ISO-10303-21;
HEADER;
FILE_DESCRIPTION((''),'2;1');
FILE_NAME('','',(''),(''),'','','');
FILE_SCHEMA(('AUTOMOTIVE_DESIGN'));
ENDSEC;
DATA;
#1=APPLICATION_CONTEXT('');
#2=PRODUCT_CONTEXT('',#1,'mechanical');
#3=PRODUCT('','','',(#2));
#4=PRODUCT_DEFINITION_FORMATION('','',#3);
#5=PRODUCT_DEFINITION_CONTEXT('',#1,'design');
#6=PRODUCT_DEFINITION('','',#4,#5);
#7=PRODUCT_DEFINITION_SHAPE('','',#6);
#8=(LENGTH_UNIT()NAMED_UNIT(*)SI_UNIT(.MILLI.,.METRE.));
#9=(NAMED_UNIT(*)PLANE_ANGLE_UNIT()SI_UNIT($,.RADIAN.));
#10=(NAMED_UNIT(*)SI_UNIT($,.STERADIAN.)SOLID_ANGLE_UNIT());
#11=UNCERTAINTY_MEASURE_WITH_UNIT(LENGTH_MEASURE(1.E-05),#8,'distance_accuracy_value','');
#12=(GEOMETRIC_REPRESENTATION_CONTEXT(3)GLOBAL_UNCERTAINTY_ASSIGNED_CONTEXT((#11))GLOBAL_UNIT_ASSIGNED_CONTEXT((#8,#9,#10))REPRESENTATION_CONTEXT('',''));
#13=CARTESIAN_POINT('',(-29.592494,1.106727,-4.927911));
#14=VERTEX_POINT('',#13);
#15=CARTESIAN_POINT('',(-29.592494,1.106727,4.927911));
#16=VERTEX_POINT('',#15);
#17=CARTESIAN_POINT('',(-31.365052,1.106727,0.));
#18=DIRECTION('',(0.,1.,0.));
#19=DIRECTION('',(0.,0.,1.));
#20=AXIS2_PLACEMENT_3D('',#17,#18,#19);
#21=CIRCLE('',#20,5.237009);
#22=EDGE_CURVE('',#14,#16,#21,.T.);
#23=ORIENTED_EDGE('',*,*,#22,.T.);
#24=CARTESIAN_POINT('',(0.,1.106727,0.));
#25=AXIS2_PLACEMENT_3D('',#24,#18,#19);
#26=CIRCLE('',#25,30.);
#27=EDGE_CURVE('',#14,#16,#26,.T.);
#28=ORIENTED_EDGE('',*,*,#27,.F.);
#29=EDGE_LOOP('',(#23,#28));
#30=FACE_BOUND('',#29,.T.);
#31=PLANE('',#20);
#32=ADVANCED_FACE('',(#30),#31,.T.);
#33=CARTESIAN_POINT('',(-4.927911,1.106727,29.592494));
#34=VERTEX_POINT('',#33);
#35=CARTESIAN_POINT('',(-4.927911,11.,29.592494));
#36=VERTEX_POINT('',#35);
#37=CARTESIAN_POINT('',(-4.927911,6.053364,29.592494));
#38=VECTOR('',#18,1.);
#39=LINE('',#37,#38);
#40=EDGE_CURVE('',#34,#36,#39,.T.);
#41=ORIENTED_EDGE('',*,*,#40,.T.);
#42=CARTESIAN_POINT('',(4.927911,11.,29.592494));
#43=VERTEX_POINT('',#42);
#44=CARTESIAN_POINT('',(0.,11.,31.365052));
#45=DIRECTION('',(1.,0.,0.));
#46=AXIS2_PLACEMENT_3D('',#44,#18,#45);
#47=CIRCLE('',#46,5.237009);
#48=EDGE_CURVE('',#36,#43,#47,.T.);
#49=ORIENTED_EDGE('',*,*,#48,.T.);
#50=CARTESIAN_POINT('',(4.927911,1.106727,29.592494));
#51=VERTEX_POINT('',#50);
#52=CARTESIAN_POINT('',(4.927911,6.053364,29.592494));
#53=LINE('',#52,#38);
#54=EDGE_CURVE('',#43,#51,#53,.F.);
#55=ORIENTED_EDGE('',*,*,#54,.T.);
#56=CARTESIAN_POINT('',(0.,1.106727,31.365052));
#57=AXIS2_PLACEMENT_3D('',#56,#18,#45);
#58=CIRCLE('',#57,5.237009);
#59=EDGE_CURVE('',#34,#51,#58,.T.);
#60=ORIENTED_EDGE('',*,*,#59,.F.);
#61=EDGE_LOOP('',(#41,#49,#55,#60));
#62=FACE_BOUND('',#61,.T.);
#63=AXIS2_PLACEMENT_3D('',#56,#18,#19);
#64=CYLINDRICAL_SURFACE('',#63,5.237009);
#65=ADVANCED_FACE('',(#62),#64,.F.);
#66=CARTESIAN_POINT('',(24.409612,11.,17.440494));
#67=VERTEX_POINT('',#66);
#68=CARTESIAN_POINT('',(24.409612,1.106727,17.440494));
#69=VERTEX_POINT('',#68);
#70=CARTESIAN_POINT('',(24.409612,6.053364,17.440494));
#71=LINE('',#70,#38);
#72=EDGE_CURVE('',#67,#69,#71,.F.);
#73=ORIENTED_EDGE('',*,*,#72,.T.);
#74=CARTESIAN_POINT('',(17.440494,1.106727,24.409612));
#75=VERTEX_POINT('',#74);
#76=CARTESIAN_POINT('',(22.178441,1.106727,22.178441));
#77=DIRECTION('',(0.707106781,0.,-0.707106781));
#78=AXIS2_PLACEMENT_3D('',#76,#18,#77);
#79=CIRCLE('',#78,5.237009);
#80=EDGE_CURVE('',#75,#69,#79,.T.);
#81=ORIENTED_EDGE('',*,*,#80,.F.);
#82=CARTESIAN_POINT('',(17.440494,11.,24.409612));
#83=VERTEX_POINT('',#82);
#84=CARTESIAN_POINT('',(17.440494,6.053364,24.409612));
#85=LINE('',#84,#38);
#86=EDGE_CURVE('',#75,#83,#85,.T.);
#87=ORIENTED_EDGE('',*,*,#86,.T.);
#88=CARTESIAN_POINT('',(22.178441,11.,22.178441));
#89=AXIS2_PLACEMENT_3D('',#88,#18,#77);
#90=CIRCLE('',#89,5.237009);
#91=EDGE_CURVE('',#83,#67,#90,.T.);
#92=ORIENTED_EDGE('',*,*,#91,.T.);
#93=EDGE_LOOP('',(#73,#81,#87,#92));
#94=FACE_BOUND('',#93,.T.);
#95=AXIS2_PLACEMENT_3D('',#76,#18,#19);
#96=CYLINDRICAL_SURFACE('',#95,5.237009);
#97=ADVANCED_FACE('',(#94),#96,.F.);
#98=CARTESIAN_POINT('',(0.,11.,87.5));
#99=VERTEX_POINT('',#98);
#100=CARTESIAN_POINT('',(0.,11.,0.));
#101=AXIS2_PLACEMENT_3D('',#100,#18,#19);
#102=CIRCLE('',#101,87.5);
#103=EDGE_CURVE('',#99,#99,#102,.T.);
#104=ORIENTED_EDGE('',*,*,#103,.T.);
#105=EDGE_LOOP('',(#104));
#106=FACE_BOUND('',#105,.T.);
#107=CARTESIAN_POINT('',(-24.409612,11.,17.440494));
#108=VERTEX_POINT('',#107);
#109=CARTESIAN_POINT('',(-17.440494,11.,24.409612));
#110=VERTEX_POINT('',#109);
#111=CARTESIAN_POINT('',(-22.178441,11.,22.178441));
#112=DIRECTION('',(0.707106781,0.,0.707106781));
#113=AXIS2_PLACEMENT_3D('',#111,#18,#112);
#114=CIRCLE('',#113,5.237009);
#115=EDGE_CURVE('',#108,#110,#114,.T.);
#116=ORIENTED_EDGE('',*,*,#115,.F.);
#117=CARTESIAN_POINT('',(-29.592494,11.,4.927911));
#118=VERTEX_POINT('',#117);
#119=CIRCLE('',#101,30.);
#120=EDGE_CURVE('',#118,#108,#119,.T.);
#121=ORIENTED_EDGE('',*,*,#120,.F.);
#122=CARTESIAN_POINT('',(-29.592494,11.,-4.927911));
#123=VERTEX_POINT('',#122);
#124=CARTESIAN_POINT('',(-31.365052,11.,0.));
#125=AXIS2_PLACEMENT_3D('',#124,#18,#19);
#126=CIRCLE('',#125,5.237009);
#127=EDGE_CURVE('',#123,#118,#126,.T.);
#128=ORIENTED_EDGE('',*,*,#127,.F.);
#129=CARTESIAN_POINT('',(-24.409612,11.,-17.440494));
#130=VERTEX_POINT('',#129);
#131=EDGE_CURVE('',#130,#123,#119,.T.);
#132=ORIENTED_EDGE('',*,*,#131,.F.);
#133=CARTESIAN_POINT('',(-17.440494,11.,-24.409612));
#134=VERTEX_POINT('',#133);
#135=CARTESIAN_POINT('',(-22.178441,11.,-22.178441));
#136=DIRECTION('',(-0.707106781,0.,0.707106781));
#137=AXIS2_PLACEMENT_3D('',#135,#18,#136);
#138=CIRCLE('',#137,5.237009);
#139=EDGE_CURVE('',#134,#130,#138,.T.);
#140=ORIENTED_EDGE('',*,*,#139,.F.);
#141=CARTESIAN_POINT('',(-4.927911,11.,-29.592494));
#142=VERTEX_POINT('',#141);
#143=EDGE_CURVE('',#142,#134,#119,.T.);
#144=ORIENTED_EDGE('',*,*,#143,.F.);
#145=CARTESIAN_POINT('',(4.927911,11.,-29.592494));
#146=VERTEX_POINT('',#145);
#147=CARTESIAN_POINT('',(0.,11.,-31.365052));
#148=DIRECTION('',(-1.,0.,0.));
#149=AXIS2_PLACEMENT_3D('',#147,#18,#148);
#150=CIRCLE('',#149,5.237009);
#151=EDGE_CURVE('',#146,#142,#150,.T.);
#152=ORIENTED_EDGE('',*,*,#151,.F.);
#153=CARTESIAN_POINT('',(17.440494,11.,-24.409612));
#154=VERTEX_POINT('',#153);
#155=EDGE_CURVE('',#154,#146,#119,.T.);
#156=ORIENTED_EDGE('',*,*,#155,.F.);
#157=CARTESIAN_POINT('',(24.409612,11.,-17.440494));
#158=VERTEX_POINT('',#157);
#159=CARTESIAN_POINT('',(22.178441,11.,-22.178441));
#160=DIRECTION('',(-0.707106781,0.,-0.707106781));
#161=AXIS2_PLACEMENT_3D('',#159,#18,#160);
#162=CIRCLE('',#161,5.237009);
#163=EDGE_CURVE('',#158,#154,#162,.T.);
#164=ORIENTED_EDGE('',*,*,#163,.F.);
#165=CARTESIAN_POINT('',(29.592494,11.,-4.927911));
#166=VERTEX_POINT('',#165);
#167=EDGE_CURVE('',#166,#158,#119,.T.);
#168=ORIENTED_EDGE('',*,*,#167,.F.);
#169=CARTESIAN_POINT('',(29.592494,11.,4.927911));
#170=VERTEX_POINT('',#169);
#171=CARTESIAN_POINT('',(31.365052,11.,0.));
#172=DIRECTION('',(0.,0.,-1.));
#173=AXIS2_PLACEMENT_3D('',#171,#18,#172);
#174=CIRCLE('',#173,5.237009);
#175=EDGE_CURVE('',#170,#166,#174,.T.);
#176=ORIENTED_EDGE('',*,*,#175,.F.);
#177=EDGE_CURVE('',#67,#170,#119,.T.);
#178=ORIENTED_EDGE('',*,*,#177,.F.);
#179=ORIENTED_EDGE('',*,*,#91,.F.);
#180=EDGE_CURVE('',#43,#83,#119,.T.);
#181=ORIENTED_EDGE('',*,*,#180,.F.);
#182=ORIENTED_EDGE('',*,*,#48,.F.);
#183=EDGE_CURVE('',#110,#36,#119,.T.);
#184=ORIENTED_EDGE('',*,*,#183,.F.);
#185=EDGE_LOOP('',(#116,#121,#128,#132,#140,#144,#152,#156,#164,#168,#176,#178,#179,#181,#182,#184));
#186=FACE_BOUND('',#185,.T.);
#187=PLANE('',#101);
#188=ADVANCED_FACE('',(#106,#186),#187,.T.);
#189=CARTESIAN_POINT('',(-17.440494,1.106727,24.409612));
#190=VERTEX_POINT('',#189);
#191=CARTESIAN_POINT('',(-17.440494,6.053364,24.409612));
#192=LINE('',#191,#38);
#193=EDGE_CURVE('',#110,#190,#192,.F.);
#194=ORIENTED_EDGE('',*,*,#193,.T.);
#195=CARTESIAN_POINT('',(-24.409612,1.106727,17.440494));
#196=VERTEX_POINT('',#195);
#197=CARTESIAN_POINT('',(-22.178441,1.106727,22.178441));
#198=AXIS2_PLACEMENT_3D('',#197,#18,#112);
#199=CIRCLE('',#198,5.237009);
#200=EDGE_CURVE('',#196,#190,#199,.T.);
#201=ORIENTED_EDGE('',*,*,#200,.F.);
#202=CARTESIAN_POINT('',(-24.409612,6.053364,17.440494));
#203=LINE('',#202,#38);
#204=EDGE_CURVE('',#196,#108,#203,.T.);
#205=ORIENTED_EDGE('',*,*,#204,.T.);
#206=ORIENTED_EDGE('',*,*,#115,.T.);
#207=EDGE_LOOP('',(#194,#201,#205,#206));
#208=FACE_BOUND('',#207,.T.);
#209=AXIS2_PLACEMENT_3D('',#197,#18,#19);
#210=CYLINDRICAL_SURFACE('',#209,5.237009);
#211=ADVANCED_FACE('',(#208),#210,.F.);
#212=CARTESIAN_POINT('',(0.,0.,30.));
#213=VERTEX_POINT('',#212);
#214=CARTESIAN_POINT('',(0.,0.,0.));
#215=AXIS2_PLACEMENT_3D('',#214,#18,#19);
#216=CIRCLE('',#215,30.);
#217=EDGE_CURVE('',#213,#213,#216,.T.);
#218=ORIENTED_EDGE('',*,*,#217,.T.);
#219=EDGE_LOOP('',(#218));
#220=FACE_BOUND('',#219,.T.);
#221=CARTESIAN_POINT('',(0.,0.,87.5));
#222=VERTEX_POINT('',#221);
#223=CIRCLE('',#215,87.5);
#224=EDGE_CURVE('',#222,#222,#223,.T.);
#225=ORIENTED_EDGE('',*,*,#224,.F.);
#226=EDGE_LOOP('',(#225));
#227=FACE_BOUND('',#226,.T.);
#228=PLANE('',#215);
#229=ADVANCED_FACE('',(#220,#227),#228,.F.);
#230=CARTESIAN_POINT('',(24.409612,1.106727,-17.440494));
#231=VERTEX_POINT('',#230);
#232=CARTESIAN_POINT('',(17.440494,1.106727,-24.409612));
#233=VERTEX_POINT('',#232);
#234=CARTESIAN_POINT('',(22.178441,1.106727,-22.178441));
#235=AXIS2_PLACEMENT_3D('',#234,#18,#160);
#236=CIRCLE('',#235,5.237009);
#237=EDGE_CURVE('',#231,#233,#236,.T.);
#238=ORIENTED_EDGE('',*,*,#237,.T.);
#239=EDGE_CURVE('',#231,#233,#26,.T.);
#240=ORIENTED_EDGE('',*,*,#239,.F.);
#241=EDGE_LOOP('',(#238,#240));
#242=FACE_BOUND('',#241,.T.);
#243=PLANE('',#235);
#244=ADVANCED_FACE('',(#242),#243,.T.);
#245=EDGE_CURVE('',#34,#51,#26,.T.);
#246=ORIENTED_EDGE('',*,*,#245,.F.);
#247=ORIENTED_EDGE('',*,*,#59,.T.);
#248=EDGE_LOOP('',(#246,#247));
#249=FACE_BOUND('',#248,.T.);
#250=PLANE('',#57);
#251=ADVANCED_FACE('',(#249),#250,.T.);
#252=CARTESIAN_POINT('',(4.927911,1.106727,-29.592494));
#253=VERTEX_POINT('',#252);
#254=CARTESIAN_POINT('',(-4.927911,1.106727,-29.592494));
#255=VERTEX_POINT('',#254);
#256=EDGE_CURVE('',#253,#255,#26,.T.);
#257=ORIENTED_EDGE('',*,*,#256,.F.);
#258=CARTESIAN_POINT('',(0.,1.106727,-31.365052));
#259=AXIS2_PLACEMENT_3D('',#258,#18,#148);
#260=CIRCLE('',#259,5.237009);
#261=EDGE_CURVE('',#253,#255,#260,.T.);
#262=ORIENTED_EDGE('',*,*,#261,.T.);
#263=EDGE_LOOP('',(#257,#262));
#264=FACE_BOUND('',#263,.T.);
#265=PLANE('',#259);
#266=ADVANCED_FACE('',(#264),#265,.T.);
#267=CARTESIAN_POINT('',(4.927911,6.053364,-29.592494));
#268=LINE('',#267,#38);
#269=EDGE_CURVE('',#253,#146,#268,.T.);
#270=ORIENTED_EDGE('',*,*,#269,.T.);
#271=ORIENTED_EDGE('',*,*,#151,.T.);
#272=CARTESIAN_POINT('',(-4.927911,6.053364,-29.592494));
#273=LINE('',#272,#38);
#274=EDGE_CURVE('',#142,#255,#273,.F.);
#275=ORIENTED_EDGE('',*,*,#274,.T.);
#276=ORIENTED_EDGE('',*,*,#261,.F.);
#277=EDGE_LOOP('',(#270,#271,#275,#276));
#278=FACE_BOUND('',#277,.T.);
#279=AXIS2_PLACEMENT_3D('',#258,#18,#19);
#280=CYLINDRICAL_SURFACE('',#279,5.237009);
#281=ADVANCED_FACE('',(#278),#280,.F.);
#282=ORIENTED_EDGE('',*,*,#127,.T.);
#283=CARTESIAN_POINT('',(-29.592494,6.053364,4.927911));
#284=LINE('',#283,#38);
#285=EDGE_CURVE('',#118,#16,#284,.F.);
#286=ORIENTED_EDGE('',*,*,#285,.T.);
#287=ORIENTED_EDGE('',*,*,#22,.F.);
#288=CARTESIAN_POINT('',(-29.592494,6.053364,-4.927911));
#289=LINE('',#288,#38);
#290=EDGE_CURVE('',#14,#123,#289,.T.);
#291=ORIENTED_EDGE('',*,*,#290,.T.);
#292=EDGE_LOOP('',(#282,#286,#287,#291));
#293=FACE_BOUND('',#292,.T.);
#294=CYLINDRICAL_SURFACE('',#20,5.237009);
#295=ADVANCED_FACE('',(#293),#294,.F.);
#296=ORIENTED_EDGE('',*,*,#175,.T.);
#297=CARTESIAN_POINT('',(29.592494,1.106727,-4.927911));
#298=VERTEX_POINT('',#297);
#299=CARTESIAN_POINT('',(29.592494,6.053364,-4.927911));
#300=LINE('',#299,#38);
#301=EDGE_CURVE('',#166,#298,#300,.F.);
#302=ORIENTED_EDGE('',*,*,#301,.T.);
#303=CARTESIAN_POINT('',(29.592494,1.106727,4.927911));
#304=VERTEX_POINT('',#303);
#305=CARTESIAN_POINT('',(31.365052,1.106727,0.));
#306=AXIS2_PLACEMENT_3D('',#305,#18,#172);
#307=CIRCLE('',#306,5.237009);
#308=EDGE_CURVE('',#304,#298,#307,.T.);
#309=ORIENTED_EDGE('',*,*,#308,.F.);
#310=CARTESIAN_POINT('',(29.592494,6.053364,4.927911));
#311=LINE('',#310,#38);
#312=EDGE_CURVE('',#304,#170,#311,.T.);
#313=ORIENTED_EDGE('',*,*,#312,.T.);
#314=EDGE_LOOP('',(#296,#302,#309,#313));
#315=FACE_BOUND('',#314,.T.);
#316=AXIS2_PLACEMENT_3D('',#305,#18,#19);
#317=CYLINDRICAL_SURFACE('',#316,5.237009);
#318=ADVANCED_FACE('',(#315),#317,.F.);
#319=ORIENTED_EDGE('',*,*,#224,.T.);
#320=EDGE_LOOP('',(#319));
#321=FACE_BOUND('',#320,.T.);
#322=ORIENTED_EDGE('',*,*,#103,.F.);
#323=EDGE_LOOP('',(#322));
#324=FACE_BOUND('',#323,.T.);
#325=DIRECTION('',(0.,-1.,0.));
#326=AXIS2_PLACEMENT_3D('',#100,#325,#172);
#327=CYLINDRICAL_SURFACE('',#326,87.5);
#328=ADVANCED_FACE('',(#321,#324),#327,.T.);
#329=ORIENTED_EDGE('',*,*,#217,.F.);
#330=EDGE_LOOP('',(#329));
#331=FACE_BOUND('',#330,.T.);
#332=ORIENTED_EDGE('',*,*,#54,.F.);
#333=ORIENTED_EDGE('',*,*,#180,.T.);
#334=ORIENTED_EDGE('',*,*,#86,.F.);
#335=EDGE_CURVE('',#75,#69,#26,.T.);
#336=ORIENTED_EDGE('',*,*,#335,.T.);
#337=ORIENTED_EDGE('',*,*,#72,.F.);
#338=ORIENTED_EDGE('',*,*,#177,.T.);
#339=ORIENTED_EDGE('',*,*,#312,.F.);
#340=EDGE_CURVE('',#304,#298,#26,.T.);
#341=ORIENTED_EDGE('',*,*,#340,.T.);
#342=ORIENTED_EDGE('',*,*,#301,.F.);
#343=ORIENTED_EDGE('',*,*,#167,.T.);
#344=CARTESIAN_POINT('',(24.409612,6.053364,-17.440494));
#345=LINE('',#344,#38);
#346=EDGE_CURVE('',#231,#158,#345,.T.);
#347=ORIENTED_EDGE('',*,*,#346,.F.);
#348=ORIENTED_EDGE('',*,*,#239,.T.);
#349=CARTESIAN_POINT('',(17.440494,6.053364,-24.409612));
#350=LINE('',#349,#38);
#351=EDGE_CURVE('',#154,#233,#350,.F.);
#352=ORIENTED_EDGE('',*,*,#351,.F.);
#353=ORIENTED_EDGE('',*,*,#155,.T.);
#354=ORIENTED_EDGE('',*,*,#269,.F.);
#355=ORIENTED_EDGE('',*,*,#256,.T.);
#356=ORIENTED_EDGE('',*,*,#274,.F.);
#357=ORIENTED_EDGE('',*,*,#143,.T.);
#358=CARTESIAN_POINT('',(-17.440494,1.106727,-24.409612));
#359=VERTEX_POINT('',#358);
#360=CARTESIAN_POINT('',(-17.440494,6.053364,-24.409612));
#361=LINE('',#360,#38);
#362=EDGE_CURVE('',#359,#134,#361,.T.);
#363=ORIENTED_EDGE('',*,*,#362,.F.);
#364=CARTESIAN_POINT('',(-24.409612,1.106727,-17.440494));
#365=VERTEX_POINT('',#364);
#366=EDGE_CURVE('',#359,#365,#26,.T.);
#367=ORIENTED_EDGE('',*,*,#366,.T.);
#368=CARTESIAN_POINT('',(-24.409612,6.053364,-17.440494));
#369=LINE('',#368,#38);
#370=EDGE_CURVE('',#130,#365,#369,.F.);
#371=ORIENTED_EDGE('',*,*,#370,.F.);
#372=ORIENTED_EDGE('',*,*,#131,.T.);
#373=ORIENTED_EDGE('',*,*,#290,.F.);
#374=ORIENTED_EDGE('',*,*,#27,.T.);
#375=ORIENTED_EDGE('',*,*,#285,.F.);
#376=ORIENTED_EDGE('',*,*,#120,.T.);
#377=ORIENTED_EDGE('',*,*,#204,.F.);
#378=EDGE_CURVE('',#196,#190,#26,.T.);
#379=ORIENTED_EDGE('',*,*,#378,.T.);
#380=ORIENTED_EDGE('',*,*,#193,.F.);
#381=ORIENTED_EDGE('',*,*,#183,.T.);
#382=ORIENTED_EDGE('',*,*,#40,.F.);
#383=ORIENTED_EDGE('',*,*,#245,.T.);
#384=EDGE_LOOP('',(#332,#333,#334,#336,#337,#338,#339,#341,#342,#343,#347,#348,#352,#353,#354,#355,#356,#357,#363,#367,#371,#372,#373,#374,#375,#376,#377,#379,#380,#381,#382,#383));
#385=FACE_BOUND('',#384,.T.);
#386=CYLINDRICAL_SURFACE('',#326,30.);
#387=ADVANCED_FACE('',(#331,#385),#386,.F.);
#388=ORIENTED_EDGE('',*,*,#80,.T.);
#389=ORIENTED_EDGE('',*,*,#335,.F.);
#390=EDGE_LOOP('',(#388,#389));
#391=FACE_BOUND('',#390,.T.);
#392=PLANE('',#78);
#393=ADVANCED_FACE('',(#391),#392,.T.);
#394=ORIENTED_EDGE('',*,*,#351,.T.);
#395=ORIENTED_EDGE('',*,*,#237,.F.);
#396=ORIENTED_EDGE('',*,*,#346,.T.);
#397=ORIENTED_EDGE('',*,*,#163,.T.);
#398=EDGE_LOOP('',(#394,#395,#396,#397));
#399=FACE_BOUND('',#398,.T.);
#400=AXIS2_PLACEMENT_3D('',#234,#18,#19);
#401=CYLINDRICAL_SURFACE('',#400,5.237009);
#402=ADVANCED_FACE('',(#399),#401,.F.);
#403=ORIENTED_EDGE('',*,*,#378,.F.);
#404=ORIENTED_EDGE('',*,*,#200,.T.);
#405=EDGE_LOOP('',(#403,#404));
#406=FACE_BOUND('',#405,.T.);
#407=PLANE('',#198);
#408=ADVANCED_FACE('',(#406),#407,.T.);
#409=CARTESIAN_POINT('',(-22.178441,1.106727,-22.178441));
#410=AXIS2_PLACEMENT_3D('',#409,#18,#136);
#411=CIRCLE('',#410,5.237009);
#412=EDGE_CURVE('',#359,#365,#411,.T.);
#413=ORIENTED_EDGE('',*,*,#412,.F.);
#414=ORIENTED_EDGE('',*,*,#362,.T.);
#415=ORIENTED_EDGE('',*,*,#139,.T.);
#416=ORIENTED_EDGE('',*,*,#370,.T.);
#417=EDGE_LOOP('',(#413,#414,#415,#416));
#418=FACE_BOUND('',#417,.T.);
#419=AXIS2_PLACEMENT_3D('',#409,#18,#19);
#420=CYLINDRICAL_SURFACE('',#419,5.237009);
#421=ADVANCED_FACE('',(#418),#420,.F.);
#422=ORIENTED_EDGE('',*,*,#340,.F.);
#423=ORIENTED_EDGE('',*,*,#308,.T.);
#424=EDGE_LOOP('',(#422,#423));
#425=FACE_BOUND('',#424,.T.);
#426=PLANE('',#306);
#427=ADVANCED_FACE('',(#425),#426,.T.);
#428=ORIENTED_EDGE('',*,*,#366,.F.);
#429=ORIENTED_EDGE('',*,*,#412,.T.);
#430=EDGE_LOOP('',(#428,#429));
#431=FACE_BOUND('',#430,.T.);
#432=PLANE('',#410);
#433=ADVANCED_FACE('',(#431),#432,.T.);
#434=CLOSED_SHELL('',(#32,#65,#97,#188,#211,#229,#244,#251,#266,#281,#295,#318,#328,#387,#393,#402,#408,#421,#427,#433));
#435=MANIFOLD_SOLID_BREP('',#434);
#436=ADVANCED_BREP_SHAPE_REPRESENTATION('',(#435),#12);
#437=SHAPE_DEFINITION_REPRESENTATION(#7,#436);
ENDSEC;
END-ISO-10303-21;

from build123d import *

# Parameters (mm, degrees)
SKETCH1_R           = 87.5
BOSS_EXTRUDE1_DEPTH = 11
SKETCH2_R           = 30
CUT_EXTRUDE1_DEPTH  = 125.231638482
SKETCH3_R           = 5.237009407
CUT_EXTRUDE2_DEPTH  = 9.893272855
CIRPATTERN1_COUNT   = 8


with BuildPart() as part:
    # Sketch1 → Boss-Extrude1 (new body)
    with BuildSketch(Plane(origin=(0, 0, 0), x_dir=(1, 0, 0), z_dir=(0, 1, 0))):
        Circle(SKETCH1_R)
    extrude(amount=BOSS_EXTRUDE1_DEPTH)

    # Sketch2 → Cut-Extrude1 (cut, through all)
    with BuildSketch(Plane(origin=(0, 0, 0), x_dir=(1, 0, 0), z_dir=(0, 1, 0))):
        Circle(SKETCH2_R)
    extrude(amount=CUT_EXTRUDE1_DEPTH, mode=Mode.SUBTRACT)

    # Sketch3 → Cut-Extrude2 (cut)
    with BuildSketch(Plane(origin=(0, 11, 0), x_dir=(1, 0, 0), z_dir=(0, 1, 0))):
        with Locations((-31.365051568, 0)):
            Circle(SKETCH3_R)
    cut_extrude2 = extrude(amount=-CUT_EXTRUDE2_DEPTH, mode=Mode.SUBTRACT)

    # CirPattern1: Cut-Extrude2 ×8 about axis
    cirpattern1_axis = Axis((0, 0, 0), (0, 1, 0))
    for i in range(1, CIRPATTERN1_COUNT):
        add(cut_extrude2.rotate(cirpattern1_axis, i * 360 / CIRPATTERN1_COUNT), mode=Mode.SUBTRACT)


solid = part.part
